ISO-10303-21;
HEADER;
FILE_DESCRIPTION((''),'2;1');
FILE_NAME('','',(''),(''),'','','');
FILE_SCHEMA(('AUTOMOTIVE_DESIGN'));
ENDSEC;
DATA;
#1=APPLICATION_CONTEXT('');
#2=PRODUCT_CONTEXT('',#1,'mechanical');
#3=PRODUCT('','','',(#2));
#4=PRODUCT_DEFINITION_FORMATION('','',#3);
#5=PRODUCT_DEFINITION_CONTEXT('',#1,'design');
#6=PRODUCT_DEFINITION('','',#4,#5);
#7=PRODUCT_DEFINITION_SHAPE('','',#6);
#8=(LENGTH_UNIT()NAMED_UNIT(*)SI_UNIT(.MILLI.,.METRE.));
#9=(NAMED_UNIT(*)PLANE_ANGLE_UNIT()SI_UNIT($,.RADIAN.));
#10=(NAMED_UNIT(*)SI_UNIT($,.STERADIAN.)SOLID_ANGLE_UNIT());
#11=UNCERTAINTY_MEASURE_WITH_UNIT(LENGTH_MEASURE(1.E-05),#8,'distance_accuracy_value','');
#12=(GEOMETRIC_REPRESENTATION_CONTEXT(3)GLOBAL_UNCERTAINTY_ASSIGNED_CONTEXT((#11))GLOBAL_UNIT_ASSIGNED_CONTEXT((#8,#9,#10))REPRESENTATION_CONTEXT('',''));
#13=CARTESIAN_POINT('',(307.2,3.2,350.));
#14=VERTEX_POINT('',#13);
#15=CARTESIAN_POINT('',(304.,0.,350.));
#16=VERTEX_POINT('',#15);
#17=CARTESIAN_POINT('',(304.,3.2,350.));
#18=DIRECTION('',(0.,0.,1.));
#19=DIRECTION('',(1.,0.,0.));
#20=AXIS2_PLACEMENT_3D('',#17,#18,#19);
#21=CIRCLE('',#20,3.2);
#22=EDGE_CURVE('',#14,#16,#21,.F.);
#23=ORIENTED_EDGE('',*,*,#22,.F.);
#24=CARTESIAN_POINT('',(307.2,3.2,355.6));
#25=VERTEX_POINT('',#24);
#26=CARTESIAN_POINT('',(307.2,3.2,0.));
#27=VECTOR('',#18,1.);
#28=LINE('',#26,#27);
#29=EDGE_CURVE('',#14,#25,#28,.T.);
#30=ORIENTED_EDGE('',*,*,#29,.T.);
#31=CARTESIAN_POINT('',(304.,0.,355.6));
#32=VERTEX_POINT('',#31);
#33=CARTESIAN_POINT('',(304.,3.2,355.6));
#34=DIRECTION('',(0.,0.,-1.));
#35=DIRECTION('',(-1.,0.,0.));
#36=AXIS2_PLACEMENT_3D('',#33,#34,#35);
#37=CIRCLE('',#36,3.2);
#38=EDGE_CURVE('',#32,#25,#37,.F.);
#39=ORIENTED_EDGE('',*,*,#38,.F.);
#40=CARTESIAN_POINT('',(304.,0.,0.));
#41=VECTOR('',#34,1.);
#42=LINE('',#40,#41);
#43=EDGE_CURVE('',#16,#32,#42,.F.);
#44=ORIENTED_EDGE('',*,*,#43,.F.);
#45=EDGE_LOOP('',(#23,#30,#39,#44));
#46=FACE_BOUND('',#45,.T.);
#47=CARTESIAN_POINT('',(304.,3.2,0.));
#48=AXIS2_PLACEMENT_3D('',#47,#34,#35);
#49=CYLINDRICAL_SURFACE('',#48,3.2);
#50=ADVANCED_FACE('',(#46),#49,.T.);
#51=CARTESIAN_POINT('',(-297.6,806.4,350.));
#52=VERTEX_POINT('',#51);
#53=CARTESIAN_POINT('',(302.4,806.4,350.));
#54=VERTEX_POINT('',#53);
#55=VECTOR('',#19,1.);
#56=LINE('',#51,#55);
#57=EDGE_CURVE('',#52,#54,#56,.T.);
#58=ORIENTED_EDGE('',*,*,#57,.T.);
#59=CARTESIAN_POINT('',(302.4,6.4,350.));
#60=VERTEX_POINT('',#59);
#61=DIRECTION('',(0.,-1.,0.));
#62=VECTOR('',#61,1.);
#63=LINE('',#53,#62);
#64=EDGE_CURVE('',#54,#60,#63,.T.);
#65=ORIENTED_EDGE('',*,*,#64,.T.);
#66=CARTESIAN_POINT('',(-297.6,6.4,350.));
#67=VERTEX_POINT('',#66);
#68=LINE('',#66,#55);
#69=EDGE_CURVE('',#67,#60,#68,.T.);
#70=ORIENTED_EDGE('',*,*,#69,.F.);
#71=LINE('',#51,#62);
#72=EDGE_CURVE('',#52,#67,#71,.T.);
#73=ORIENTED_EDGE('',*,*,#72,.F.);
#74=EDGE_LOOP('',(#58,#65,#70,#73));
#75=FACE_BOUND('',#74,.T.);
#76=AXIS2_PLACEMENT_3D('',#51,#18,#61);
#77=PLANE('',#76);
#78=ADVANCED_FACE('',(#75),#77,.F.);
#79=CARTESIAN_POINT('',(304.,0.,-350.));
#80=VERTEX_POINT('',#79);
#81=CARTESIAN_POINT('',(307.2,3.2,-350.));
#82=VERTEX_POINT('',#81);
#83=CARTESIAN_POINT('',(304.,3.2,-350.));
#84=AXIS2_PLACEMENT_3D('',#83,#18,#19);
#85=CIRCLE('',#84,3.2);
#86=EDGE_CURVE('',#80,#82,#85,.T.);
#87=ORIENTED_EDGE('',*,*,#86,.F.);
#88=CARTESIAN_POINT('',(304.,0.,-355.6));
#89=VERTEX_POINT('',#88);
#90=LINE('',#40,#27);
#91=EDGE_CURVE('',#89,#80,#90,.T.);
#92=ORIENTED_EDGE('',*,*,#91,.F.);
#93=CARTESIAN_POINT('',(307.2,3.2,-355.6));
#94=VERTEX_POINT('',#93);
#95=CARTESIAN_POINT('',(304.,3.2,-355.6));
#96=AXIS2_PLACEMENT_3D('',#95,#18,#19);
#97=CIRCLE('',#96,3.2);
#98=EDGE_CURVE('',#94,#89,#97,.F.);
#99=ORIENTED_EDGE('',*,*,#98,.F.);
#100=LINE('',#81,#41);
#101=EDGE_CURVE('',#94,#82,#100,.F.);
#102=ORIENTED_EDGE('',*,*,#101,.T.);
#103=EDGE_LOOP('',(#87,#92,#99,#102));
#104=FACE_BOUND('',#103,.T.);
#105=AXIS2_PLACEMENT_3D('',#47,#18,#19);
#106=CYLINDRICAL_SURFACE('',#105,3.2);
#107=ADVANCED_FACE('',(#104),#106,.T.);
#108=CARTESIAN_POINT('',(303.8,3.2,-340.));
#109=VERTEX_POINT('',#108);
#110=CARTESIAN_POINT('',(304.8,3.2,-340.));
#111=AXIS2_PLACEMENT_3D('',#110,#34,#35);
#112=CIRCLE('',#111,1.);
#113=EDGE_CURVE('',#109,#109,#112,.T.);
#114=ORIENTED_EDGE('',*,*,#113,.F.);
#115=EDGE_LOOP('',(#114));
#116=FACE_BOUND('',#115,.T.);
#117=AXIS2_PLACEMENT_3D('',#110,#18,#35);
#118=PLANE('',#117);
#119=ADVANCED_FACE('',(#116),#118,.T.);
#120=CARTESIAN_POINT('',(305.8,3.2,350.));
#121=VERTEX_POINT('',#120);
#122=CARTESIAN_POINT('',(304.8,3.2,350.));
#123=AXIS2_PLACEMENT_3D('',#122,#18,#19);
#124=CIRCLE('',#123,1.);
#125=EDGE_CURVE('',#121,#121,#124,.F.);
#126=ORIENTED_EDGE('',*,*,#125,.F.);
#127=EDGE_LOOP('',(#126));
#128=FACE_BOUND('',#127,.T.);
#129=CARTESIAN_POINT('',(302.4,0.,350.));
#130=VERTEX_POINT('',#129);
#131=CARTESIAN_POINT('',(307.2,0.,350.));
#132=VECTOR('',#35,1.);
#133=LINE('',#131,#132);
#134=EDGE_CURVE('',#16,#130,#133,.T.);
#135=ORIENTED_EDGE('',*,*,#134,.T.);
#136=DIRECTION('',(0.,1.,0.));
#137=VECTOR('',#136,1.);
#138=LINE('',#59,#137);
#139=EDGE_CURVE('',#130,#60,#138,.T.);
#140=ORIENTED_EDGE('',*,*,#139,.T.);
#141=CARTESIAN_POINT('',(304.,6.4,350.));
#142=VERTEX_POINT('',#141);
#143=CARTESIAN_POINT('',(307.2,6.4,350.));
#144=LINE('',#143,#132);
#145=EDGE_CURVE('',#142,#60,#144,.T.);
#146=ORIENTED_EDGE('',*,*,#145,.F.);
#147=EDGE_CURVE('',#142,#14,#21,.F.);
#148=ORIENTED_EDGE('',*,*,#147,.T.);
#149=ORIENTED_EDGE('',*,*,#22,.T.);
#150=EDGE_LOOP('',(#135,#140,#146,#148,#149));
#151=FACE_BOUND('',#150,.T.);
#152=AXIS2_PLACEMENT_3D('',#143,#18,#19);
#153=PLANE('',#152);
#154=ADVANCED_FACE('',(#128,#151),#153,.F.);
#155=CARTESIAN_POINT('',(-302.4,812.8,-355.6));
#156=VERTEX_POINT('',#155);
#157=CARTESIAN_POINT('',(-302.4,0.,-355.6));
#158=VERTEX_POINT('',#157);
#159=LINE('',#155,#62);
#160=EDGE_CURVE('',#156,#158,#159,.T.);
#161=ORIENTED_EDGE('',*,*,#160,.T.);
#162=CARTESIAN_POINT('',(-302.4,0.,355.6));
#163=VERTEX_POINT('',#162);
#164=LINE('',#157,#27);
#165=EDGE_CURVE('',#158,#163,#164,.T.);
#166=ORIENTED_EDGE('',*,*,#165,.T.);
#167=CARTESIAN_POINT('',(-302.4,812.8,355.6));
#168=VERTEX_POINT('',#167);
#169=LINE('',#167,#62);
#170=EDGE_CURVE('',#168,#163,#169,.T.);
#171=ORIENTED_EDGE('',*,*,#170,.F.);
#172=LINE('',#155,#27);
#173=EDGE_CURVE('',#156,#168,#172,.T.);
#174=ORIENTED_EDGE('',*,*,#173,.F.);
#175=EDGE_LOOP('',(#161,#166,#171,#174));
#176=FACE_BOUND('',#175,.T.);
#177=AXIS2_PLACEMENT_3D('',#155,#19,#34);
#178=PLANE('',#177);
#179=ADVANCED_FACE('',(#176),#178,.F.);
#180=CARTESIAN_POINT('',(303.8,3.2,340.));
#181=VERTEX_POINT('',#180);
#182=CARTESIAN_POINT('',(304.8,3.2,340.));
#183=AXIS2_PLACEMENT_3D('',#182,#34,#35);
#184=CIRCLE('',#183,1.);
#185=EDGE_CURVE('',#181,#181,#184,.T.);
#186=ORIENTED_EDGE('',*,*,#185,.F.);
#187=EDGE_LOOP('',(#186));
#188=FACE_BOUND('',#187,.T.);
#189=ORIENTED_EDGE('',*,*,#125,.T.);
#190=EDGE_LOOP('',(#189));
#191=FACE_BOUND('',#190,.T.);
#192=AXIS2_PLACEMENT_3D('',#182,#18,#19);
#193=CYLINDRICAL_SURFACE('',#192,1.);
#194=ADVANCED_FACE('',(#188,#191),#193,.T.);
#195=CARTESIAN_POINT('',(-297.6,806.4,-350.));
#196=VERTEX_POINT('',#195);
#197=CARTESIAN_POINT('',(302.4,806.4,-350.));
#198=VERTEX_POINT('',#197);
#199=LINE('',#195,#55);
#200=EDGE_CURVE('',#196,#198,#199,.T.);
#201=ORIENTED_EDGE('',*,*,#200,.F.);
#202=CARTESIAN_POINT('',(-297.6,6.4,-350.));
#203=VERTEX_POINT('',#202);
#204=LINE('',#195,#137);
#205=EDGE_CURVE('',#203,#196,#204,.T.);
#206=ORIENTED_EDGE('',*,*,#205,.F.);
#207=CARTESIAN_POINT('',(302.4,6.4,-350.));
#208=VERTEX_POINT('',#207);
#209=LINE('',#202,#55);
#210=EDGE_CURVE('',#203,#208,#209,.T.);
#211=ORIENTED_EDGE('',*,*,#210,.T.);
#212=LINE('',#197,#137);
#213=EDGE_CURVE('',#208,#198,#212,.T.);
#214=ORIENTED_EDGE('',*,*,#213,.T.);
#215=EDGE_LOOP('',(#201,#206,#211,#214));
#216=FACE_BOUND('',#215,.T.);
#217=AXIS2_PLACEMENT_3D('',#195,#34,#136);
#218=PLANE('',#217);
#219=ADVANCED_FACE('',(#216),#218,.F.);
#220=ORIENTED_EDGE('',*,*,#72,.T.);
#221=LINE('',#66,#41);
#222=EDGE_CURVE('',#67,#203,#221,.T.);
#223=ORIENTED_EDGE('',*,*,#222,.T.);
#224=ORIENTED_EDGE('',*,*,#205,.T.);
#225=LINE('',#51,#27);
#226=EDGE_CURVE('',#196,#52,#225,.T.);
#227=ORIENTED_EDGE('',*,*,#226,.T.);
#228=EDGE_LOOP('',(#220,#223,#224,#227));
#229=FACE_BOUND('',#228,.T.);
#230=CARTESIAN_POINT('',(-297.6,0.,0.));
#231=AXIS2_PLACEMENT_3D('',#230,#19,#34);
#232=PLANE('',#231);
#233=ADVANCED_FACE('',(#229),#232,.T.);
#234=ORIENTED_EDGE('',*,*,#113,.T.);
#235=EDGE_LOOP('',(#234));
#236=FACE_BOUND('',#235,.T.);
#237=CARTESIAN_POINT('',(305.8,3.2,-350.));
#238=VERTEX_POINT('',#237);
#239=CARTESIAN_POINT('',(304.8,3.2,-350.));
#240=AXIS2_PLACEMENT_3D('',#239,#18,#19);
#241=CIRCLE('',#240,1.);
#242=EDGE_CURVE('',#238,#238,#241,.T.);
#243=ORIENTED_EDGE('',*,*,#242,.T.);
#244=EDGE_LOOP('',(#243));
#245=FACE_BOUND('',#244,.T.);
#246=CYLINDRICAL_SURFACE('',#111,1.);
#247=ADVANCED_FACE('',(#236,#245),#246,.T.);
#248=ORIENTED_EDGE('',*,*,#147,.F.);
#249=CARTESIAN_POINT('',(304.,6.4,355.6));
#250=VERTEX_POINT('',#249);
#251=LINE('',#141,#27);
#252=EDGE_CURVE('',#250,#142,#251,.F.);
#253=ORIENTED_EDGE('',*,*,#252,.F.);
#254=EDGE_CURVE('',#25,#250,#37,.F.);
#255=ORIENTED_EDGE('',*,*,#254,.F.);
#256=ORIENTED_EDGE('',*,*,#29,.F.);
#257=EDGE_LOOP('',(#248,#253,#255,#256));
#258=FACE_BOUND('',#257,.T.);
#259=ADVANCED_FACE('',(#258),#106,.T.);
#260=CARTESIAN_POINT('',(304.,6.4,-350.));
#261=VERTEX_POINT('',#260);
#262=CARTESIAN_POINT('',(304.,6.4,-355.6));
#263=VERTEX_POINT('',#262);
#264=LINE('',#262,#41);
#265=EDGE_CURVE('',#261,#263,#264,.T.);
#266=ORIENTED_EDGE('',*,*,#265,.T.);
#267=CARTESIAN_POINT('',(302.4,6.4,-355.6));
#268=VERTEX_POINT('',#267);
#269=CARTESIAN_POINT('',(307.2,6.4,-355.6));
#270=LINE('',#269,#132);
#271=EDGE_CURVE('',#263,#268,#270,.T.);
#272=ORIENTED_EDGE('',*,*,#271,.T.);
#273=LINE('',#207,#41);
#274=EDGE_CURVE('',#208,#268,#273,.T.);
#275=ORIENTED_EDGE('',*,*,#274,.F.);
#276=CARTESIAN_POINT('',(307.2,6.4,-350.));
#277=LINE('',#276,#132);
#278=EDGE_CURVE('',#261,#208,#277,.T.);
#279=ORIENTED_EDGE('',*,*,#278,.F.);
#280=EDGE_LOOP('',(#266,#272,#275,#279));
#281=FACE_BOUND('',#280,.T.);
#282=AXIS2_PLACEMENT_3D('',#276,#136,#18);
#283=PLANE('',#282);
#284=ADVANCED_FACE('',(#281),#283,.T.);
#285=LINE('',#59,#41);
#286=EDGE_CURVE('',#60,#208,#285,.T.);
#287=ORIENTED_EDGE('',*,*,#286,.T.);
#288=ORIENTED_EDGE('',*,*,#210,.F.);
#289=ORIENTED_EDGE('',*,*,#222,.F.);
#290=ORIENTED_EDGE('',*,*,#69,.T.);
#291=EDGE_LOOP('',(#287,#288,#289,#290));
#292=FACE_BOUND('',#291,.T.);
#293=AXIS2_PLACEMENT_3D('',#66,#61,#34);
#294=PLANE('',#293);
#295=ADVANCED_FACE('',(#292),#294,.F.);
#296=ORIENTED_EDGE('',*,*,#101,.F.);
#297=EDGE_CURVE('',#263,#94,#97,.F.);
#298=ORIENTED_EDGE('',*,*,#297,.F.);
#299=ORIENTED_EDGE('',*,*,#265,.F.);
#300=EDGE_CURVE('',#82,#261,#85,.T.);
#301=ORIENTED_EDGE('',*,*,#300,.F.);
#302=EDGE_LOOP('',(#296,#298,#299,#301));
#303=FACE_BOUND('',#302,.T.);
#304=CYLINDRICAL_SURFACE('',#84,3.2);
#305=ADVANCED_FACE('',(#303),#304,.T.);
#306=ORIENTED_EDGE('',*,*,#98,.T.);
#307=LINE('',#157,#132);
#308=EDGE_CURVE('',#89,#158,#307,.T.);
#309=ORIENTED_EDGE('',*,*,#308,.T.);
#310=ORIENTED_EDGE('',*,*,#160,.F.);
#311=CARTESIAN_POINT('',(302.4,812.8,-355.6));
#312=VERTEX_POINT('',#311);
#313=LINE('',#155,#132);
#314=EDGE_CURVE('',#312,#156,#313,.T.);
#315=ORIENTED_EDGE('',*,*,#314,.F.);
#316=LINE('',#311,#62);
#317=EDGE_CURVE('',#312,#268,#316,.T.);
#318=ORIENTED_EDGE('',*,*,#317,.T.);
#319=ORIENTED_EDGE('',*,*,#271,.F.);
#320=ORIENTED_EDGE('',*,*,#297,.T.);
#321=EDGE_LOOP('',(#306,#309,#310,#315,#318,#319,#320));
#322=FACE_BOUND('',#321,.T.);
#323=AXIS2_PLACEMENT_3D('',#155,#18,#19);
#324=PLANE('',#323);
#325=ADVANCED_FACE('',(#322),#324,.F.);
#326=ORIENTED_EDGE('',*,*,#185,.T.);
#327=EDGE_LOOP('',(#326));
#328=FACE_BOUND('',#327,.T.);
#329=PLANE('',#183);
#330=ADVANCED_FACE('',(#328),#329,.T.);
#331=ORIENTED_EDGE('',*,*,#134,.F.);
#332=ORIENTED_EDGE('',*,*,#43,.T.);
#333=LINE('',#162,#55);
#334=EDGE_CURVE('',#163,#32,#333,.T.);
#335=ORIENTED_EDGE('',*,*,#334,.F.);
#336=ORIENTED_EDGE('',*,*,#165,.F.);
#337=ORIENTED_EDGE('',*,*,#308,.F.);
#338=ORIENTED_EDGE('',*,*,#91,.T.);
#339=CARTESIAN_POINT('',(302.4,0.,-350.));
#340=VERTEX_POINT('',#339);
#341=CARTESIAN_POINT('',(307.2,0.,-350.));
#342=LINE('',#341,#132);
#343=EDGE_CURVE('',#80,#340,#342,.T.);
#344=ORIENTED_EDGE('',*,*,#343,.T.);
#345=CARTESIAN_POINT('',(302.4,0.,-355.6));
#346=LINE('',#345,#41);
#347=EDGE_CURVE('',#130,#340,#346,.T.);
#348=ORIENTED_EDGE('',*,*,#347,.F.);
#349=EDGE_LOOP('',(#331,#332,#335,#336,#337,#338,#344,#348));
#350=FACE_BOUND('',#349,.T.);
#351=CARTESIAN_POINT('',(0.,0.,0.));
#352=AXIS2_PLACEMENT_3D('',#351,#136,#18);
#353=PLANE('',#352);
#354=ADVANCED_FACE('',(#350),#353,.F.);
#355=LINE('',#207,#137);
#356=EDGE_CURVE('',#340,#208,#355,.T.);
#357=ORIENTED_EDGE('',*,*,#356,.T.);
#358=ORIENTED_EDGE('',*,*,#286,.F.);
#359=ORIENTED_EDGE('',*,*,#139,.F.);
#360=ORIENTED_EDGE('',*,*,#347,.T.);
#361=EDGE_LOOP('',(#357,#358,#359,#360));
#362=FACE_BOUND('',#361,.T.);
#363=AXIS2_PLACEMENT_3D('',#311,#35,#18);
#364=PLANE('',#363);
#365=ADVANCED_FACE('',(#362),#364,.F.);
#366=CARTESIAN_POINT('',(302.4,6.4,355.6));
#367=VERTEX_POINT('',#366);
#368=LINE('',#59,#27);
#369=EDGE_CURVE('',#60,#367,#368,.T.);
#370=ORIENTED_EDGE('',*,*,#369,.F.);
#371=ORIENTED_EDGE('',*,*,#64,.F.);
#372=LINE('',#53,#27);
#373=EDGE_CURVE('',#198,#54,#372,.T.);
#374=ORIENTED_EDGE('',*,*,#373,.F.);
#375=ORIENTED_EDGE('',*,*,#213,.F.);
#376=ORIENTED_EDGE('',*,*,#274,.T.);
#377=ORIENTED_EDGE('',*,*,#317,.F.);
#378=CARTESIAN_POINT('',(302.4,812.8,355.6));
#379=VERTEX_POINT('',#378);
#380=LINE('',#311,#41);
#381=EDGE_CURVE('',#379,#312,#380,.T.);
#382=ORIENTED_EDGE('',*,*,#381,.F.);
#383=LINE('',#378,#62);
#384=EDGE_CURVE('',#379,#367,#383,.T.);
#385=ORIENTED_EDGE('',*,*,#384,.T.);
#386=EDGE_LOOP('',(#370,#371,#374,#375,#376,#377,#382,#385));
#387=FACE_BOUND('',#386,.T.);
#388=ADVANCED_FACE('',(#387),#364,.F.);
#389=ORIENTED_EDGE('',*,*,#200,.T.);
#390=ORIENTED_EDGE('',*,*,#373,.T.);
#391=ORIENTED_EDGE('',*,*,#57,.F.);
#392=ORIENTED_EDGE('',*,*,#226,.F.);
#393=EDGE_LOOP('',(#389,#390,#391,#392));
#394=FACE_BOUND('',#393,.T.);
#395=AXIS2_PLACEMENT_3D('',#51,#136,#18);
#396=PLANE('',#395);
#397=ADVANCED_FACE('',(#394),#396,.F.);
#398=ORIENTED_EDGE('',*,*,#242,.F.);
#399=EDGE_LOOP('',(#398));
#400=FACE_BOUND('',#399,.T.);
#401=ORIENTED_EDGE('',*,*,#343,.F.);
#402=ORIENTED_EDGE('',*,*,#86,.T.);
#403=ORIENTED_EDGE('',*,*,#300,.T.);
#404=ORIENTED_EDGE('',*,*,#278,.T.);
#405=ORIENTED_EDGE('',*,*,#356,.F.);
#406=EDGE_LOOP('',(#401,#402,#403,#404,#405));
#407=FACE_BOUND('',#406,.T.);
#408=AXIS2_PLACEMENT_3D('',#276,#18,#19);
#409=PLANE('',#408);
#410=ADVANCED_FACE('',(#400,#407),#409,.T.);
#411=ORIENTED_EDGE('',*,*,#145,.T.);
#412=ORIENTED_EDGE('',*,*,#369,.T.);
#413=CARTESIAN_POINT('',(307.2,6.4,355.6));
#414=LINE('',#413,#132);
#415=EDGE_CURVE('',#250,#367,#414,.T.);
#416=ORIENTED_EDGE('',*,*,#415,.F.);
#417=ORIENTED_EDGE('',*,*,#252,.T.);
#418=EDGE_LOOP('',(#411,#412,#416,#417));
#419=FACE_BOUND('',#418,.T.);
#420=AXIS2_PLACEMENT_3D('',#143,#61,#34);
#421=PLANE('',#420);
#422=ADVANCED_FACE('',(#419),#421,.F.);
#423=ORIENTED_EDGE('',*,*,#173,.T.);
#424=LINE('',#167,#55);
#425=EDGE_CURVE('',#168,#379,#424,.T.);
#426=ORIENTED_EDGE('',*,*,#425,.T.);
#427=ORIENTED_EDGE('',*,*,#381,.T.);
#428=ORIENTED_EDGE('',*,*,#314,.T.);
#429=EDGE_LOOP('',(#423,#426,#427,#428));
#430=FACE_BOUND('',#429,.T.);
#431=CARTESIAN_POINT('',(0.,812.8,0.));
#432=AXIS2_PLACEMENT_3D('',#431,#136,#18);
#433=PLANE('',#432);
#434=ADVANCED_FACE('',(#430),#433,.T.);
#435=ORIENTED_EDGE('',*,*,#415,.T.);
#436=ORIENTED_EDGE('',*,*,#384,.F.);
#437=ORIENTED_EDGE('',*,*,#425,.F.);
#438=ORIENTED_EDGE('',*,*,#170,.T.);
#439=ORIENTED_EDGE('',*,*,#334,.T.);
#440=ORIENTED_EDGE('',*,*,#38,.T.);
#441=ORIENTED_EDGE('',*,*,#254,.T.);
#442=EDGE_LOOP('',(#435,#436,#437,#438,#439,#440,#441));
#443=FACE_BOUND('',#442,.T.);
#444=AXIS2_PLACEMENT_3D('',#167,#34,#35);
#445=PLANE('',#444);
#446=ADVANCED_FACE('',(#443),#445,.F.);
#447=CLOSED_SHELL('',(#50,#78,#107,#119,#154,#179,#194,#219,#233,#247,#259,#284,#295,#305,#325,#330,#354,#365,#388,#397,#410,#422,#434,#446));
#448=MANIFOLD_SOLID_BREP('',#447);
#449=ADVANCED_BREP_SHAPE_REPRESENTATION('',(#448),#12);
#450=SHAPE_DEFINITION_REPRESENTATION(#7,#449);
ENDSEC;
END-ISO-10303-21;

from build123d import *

# Parameters (mm, degrees)
SKETCH1_W            = 604.8
SKETCH1_H            = 711.2
BOSS_EXTRUDE1_DEPTH  = 812.8
SKETCH2_W            = 700
SKETCH2_H            = 800
BOSS_EXTRUDE2_DEPTH  = 600
SKETCH2_2_W          = 700
SKETCH2_2_H          = 800
CUT_EXTRUDE1_DEPTH   = 600
SKETCH3_W            = 5.6
SKETCH3_H            = 6.4
BOSS_EXTRUDE3_DEPTH  = 4.8
FILLET1_R            = 3.2
SKETCH4_R            = 1
BOSS_EXTRUDE4_DEPTH  = 10
FILLET1_OF_MIRROR1_R = 3.2


with BuildPart() as part:
    # Sketch1 → Boss-Extrude1 (new body)
    with BuildSketch(Plane(origin=(0, 0, 0), x_dir=(1, 0, 0), z_dir=(0, 1, 0))):
        Rectangle(SKETCH1_W, SKETCH1_H)
    extrude(amount=BOSS_EXTRUDE1_DEPTH)

    # Sketch2 → Boss-Extrude2 (add)
    with BuildSketch(Plane(origin=(302.4, 0, 0), x_dir=(0, 0, -1), z_dir=(1, 0, 0))):
        with Locations((0, 406.4)):
            Rectangle(SKETCH2_W, SKETCH2_H)
    extrude(amount=-BOSS_EXTRUDE2_DEPTH)

    # Sketch2<2> → Cut-Extrude1 (cut)
    with BuildSketch(Plane(origin=(302.4, 0, 0), x_dir=(0, 0, -1), z_dir=(1, 0, 0))):
        with Locations((0, 406.4)):
            Rectangle(SKETCH2_2_W, SKETCH2_2_H)
    extrude(amount=-CUT_EXTRUDE1_DEPTH, mode=Mode.SUBTRACT)

    # Sketch3 → Boss-Extrude3 (add)
    with BuildSketch(Plane(origin=(302.4, 0, 0), x_dir=(0, 0, -1), z_dir=(1, 0, 0))):
        with Locations((-352.8, 3.2)):
            Rectangle(SKETCH3_W, SKETCH3_H)
    boss_extrude3 = extrude(amount=BOSS_EXTRUDE3_DEPTH)

    # Fillet1
    fillet1_edges = [part.edges().sort_by_distance(p)[0] for p in [
        (307.2, 0, 352.8),
        (307.2, 6.4, 352.8),
    ]]
    fillet(fillet1_edges, radius=FILLET1_R - 0.0001)  # a hair under: the kernel refuses the full size

    # Sketch4 → Boss-Extrude4 (add)
    with BuildSketch(Plane(origin=(0, 0, 350), x_dir=(-1, 0, 0), z_dir=(0, 0, -1))):
        with Locations(Location((-304.8, 3.2, 0), (0, 0, 180))):
            Circle(SKETCH4_R)
    boss_extrude4 = extrude(amount=BOSS_EXTRUDE4_DEPTH)

    # Mirror1: Boss-Extrude3, Boss-Extrude4 across plane
    add(boss_extrude3.mirror(Plane.XY))
    add(boss_extrude4.mirror(Plane.XY))

    # Fillet1 of Mirror1
    fillet1_of_mirror1_edges = [part.edges().sort_by_distance(p)[0] for p in [
        (307.2, 0, -352.8),
        (307.2, 6.4, -352.8),
    ]]
    fillet(fillet1_of_mirror1_edges, radius=FILLET1_OF_MIRROR1_R - 0.0001)  # a hair under: the kernel refuses the full size


solid = part.part
